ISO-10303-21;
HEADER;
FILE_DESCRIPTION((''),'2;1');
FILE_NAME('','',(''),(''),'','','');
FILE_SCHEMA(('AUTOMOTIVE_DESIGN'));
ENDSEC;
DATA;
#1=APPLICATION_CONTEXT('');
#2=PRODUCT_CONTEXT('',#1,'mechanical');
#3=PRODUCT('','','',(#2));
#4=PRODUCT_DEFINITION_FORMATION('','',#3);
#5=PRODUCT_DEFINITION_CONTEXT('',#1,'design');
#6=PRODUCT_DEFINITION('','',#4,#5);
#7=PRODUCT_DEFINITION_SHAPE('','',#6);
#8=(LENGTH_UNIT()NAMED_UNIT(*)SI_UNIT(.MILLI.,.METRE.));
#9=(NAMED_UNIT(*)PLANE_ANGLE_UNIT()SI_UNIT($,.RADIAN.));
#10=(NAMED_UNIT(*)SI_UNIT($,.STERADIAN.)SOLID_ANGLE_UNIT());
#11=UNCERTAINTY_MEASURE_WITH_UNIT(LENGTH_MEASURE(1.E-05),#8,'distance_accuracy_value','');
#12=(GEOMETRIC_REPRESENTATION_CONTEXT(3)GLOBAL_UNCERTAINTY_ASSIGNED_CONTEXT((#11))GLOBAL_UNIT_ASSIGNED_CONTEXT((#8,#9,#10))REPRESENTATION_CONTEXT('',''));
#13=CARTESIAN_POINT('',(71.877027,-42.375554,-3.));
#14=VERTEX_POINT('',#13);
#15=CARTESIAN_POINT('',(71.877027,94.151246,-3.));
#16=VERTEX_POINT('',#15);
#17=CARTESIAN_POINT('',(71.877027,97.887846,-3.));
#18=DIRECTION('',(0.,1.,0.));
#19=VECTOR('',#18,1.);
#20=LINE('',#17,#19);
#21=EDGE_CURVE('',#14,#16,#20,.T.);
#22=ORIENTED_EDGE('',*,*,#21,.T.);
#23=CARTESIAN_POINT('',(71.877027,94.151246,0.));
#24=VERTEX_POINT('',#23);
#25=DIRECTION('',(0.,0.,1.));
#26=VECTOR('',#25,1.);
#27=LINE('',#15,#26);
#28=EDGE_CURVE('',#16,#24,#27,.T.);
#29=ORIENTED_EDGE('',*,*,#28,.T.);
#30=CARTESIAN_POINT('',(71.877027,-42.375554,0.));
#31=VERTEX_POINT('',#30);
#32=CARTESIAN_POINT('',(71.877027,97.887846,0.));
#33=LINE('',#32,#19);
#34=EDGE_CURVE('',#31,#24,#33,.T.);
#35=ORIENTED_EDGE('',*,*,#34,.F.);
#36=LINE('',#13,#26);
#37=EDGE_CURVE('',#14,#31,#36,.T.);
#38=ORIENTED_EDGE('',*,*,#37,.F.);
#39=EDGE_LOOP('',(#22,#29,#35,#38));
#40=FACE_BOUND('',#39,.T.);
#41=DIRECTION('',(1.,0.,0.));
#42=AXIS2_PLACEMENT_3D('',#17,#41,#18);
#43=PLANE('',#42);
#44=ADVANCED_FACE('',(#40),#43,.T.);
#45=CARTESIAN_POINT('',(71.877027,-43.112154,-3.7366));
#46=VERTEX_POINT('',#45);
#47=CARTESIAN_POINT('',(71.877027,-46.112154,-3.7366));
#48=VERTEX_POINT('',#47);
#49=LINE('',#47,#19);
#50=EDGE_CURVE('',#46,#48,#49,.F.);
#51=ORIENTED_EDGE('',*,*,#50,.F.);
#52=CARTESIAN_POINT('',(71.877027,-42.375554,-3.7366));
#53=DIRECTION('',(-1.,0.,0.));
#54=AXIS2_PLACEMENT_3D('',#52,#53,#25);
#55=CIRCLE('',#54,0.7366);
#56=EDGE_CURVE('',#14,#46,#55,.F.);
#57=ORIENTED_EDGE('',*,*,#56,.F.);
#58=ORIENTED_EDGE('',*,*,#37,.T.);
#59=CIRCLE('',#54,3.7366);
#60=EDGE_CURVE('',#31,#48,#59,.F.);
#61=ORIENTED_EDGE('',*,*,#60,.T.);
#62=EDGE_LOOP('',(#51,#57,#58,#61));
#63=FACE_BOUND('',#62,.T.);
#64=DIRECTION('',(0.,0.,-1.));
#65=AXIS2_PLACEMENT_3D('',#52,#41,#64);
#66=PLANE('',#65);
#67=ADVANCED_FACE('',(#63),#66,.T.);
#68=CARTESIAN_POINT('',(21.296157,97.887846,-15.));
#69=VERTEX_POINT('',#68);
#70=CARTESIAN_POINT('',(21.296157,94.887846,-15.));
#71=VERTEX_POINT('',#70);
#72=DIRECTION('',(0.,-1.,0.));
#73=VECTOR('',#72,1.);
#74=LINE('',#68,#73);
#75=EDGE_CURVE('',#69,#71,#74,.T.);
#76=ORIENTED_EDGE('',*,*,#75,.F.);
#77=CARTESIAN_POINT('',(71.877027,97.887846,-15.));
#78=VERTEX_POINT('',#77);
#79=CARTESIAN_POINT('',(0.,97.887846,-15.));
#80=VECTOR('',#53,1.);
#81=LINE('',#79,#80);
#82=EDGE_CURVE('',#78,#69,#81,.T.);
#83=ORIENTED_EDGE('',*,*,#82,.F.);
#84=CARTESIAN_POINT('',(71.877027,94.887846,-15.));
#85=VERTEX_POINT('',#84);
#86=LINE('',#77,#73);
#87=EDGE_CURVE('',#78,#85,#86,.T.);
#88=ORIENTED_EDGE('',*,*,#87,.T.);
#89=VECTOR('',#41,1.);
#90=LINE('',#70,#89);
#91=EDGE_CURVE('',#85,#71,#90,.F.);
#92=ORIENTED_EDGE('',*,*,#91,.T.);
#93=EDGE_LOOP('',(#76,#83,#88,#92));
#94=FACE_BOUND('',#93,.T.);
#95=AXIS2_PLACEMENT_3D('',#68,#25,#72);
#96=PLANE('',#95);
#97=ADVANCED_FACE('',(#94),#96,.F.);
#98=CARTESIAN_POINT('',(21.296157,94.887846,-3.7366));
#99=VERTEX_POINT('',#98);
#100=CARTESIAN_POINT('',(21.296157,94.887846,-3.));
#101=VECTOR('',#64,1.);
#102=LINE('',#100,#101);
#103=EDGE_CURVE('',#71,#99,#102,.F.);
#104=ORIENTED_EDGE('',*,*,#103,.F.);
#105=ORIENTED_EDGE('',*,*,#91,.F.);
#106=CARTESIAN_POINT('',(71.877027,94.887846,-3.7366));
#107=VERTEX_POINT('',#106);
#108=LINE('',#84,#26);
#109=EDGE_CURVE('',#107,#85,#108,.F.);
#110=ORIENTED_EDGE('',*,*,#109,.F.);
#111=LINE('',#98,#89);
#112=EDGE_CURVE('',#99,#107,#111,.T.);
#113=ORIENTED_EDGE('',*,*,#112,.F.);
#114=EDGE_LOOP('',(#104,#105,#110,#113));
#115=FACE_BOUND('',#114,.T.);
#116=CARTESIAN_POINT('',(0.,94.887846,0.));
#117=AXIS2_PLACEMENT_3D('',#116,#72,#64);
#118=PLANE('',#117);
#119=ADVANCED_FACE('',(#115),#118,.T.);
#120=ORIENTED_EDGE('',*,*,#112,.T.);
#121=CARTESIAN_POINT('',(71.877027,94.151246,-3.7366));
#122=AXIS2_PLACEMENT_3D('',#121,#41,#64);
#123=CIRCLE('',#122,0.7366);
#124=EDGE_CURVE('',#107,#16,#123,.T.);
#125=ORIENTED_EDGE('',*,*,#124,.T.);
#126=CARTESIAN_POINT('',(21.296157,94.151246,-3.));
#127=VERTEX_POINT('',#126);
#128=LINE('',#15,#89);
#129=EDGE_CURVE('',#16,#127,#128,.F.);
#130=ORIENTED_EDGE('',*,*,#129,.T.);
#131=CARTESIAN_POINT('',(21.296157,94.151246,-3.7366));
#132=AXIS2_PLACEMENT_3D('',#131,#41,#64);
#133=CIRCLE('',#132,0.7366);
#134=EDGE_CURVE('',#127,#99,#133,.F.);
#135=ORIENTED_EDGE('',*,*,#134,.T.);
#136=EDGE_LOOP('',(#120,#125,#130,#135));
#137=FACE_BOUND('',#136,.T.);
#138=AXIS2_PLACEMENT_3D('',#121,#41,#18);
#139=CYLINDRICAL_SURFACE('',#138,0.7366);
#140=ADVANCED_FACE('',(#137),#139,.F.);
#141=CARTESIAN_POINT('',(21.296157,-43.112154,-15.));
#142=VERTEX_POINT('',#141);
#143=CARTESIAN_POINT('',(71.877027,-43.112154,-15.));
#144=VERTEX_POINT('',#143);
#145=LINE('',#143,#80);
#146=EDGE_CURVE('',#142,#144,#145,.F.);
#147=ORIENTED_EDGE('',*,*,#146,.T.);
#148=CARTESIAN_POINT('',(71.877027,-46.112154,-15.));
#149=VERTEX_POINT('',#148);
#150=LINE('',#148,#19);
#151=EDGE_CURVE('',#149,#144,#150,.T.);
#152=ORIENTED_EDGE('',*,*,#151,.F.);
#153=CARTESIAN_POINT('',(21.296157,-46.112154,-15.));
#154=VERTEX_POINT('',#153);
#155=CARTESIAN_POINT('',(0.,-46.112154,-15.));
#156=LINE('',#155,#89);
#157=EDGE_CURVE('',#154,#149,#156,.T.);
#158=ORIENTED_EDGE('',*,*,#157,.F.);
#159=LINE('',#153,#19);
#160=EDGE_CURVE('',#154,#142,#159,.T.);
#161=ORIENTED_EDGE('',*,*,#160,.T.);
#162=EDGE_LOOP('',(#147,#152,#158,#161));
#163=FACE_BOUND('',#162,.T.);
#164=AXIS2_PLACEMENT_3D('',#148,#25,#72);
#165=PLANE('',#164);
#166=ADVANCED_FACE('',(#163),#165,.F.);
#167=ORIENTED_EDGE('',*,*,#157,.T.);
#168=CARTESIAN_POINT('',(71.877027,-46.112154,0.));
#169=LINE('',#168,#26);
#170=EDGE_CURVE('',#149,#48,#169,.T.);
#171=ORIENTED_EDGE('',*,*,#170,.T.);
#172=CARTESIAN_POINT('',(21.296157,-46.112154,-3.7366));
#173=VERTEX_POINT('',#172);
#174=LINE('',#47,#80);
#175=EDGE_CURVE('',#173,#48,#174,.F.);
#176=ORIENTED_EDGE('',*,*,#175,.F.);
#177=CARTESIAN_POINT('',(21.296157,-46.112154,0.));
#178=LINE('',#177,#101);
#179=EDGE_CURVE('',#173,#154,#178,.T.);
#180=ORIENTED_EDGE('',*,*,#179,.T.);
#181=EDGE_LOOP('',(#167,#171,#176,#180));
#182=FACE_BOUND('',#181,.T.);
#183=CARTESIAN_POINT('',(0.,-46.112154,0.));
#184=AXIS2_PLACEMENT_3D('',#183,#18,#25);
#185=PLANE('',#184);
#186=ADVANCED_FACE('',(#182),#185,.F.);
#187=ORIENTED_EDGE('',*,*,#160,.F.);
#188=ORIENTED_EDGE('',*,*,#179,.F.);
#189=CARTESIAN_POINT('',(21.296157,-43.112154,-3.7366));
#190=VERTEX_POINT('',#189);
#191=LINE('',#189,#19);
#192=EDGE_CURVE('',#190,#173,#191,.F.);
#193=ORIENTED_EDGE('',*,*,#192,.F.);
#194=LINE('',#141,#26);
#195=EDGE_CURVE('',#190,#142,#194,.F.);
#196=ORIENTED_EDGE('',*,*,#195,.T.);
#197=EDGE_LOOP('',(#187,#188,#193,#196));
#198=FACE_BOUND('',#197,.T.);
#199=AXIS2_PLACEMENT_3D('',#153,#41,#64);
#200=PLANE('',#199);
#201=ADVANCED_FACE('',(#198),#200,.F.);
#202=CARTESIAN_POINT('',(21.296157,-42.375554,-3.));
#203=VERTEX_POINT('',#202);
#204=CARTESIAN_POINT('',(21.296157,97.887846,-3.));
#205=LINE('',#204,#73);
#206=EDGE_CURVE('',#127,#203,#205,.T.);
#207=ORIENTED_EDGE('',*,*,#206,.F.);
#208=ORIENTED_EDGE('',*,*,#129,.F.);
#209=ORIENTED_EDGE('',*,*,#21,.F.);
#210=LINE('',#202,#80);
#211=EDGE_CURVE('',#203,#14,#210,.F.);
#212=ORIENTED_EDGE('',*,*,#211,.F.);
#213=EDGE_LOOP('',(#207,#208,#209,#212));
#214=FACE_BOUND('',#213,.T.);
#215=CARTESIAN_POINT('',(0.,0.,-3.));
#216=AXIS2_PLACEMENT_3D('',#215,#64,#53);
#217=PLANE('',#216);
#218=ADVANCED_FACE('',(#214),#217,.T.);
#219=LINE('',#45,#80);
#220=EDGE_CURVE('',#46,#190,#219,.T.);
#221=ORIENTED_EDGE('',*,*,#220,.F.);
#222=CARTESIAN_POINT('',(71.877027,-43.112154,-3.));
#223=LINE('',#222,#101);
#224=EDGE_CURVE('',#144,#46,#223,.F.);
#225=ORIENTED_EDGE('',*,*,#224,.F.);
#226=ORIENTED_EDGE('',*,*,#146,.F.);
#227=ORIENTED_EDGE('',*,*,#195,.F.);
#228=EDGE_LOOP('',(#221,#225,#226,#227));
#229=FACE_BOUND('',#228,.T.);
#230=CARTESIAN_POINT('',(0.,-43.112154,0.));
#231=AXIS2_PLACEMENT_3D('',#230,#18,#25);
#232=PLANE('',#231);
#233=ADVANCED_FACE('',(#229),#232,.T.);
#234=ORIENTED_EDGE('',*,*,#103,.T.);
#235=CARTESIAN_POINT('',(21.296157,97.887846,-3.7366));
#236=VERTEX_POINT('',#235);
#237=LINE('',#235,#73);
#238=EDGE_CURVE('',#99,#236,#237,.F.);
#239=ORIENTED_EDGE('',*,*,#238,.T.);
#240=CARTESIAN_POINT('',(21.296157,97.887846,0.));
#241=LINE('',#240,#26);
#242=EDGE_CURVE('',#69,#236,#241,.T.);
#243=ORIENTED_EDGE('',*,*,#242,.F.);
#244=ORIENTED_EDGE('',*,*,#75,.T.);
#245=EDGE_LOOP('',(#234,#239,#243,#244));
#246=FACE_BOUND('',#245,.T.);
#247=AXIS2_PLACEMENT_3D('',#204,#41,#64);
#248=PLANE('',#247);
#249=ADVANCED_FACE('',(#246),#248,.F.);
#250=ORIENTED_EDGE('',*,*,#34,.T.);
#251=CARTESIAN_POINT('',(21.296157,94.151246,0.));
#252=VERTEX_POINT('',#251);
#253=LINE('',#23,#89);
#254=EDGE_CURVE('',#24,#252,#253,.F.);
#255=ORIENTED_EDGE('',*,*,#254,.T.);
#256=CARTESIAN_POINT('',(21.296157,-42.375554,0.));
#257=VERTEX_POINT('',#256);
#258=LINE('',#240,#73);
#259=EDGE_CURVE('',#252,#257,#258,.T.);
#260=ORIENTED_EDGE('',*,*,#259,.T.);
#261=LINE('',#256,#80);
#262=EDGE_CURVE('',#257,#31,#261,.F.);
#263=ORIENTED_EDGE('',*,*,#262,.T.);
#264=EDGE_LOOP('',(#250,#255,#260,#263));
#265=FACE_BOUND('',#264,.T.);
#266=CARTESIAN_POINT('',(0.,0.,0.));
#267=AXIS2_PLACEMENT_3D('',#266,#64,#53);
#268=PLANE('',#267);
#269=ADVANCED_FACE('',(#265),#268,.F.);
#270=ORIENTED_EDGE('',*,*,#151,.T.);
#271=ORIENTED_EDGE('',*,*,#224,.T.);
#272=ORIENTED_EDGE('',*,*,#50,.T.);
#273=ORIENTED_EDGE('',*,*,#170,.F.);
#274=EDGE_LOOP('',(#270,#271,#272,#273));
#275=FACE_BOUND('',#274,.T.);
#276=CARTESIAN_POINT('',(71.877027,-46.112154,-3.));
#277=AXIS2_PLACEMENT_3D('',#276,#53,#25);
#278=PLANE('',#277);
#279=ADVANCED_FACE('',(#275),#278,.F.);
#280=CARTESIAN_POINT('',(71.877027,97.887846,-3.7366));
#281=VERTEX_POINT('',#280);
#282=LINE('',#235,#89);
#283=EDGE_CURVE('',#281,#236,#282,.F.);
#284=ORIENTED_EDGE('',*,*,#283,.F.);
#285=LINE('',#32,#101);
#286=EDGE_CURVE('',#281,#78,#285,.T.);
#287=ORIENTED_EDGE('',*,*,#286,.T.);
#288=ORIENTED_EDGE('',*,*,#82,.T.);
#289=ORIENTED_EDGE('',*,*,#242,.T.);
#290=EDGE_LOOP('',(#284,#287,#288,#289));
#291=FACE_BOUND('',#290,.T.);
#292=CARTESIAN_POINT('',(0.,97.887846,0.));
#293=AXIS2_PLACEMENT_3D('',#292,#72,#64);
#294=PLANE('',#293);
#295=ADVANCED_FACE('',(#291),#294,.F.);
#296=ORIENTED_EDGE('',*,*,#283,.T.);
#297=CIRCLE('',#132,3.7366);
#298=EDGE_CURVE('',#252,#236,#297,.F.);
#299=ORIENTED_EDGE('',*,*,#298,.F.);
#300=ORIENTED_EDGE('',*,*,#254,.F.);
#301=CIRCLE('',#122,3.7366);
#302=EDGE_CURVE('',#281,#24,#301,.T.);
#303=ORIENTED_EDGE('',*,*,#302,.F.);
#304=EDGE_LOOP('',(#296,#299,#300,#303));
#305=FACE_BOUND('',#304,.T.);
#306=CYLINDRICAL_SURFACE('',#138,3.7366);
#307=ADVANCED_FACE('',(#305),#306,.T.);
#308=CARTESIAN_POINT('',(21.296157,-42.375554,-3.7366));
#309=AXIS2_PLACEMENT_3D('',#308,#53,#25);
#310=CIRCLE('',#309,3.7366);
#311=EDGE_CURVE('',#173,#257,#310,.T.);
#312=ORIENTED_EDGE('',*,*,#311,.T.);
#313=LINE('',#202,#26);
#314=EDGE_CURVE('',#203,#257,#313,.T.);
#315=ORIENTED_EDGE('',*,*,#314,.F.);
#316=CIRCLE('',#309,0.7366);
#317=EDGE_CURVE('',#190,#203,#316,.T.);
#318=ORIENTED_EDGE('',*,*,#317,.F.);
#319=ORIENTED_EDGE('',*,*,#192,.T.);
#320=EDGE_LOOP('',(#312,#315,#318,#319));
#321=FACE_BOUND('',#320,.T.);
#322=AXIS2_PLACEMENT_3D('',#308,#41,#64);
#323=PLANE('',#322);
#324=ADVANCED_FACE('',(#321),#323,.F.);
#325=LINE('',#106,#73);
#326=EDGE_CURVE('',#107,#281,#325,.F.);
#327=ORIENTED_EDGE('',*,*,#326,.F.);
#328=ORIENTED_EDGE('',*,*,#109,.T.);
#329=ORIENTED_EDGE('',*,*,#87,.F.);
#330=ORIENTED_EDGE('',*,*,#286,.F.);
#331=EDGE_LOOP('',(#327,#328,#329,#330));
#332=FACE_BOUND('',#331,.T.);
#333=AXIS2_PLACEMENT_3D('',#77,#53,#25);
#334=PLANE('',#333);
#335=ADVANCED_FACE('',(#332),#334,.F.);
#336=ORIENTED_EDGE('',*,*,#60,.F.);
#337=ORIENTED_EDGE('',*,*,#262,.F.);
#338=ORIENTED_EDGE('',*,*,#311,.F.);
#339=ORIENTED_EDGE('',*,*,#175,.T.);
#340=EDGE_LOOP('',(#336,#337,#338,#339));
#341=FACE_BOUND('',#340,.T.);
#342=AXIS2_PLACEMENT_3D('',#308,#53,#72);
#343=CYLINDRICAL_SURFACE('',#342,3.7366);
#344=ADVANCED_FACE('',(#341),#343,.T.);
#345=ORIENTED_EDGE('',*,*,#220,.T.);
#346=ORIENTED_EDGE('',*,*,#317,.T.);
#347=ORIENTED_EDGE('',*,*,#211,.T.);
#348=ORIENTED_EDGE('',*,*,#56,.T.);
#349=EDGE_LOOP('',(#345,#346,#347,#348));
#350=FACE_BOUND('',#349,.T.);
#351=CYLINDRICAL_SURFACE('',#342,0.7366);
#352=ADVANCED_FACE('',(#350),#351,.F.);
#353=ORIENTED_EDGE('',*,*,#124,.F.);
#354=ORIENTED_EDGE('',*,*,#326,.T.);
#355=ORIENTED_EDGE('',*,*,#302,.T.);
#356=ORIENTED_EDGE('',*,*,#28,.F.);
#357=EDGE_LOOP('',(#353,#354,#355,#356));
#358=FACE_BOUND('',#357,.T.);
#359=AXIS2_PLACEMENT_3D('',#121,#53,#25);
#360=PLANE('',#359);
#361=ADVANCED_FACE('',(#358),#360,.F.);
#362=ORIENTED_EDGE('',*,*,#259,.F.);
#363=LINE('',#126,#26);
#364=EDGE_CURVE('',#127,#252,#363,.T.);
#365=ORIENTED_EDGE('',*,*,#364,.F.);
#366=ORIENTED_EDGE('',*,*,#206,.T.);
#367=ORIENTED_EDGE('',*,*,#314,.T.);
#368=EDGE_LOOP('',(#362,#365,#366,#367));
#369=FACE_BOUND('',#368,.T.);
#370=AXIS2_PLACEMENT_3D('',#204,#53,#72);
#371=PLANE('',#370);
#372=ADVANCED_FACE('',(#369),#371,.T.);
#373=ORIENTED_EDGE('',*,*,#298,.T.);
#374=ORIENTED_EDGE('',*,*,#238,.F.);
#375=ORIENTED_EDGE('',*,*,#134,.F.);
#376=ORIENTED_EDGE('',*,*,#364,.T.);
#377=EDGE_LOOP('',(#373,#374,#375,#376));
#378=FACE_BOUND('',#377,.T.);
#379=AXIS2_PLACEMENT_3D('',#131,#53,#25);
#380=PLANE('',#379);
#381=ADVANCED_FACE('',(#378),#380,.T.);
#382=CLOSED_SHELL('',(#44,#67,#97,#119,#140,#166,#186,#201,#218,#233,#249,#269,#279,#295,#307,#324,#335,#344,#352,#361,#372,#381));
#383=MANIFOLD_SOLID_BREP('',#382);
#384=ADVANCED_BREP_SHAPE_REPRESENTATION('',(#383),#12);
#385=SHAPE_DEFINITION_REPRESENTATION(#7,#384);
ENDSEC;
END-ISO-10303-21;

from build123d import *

# Parameters (mm, degrees)
SKETCH1_W                    = 50.580870405
SKETCH1_H                    = 144
BASE_FLANGE1_DEPTH           = 3
EDGE_FLANGE1_STRIP_W         = 13.4732
EDGE_FLANGE1_STRIP_H         = 3
EDGE_FLANGE1_STRIP_CUT_DEPTH = 50.580870405
EDGE_FLANGE1_DEPTH           = 50.580870405
EDGE_FLANGE2_STRIP_W         = 13.4732
EDGE_FLANGE2_STRIP_H         = 3
EDGE_FLANGE2_STRIP_CUT_DEPTH = 50.580870405
EDGE_FLANGE2_DEPTH           = 50.580870405


# Sheet-metal steps are written as plain solids
with BuildPart() as part:
    # Sketch1 → Base-Flange1 (new body)
    with BuildSketch(Plane.XY):
        with Locations((46.586592155, 25.88784612)):
            Rectangle(SKETCH1_W, SKETCH1_H)
    extrude(amount=-BASE_FLANGE1_DEPTH)

    # Edge-Flange1 strip (across the edge) → Edge-Flange1 strip cut (cut)
    with BuildSketch(Plane(origin=(71.877027357, -46.11215388, -3), x_dir=(0, 1, 0), z_dir=(-1, 0, 0))):
        with Locations((-3, -1.5)):
            Rectangle(EDGE_FLANGE1_STRIP_W, EDGE_FLANGE1_STRIP_H)
    extrude(amount=EDGE_FLANGE1_STRIP_CUT_DEPTH, mode=Mode.SUBTRACT)

    # Edge-Flange1 section (across the edge) → Edge-Flange1 (add)
    with BuildSketch(Plane(origin=(71.877027357, -46.11215388, -3), x_dir=(0, 1, 0), z_dir=(-1, 0, 0))):
        with BuildLine():
            Line((0, 0.7366), (0, 12))
            Line((0, 12), (3, 12))
            Line((3, 12), (3, 0.7366))
            ThreePointArc((3, 0.7366), (3.215745145, 0.215745145), (3.7366, 0))
            Line((3.7366, 0), (3.7366, -3))
            ThreePointArc((3.7366, -3), (1.094424801, -1.905575199), (0, 0.7366))
        make_face()
    extrude(amount=EDGE_FLANGE1_DEPTH)

    # Edge-Flange2 strip (across the edge) → Edge-Flange2 strip cut (cut)
    with BuildSketch(Plane(origin=(21.296156952, 97.88784612, -3), x_dir=(0, -1, 0), z_dir=(1, 0, 0))):
        with Locations((-3, -1.5)):
            Rectangle(EDGE_FLANGE2_STRIP_W, EDGE_FLANGE2_STRIP_H)
    extrude(amount=EDGE_FLANGE2_STRIP_CUT_DEPTH, mode=Mode.SUBTRACT)

    # Edge-Flange2 section (across the edge) → Edge-Flange2 (add)
    with BuildSketch(Plane(origin=(21.296156952, 97.88784612, -3), x_dir=(0, -1, 0), z_dir=(1, 0, 0))):
        with BuildLine():
            Line((0, 0.7366), (0, 12))
            Line((0, 12), (3, 12))
            Line((3, 12), (3, 0.7366))
            ThreePointArc((3, 0.7366), (3.215745145, 0.215745145), (3.7366, 0))
            Line((3.7366, 0), (3.7366, -3))
            ThreePointArc((3.7366, -3), (1.094424801, -1.905575199), (0, 0.7366))
        make_face()
    extrude(amount=EDGE_FLANGE2_DEPTH)


solid = part.part
